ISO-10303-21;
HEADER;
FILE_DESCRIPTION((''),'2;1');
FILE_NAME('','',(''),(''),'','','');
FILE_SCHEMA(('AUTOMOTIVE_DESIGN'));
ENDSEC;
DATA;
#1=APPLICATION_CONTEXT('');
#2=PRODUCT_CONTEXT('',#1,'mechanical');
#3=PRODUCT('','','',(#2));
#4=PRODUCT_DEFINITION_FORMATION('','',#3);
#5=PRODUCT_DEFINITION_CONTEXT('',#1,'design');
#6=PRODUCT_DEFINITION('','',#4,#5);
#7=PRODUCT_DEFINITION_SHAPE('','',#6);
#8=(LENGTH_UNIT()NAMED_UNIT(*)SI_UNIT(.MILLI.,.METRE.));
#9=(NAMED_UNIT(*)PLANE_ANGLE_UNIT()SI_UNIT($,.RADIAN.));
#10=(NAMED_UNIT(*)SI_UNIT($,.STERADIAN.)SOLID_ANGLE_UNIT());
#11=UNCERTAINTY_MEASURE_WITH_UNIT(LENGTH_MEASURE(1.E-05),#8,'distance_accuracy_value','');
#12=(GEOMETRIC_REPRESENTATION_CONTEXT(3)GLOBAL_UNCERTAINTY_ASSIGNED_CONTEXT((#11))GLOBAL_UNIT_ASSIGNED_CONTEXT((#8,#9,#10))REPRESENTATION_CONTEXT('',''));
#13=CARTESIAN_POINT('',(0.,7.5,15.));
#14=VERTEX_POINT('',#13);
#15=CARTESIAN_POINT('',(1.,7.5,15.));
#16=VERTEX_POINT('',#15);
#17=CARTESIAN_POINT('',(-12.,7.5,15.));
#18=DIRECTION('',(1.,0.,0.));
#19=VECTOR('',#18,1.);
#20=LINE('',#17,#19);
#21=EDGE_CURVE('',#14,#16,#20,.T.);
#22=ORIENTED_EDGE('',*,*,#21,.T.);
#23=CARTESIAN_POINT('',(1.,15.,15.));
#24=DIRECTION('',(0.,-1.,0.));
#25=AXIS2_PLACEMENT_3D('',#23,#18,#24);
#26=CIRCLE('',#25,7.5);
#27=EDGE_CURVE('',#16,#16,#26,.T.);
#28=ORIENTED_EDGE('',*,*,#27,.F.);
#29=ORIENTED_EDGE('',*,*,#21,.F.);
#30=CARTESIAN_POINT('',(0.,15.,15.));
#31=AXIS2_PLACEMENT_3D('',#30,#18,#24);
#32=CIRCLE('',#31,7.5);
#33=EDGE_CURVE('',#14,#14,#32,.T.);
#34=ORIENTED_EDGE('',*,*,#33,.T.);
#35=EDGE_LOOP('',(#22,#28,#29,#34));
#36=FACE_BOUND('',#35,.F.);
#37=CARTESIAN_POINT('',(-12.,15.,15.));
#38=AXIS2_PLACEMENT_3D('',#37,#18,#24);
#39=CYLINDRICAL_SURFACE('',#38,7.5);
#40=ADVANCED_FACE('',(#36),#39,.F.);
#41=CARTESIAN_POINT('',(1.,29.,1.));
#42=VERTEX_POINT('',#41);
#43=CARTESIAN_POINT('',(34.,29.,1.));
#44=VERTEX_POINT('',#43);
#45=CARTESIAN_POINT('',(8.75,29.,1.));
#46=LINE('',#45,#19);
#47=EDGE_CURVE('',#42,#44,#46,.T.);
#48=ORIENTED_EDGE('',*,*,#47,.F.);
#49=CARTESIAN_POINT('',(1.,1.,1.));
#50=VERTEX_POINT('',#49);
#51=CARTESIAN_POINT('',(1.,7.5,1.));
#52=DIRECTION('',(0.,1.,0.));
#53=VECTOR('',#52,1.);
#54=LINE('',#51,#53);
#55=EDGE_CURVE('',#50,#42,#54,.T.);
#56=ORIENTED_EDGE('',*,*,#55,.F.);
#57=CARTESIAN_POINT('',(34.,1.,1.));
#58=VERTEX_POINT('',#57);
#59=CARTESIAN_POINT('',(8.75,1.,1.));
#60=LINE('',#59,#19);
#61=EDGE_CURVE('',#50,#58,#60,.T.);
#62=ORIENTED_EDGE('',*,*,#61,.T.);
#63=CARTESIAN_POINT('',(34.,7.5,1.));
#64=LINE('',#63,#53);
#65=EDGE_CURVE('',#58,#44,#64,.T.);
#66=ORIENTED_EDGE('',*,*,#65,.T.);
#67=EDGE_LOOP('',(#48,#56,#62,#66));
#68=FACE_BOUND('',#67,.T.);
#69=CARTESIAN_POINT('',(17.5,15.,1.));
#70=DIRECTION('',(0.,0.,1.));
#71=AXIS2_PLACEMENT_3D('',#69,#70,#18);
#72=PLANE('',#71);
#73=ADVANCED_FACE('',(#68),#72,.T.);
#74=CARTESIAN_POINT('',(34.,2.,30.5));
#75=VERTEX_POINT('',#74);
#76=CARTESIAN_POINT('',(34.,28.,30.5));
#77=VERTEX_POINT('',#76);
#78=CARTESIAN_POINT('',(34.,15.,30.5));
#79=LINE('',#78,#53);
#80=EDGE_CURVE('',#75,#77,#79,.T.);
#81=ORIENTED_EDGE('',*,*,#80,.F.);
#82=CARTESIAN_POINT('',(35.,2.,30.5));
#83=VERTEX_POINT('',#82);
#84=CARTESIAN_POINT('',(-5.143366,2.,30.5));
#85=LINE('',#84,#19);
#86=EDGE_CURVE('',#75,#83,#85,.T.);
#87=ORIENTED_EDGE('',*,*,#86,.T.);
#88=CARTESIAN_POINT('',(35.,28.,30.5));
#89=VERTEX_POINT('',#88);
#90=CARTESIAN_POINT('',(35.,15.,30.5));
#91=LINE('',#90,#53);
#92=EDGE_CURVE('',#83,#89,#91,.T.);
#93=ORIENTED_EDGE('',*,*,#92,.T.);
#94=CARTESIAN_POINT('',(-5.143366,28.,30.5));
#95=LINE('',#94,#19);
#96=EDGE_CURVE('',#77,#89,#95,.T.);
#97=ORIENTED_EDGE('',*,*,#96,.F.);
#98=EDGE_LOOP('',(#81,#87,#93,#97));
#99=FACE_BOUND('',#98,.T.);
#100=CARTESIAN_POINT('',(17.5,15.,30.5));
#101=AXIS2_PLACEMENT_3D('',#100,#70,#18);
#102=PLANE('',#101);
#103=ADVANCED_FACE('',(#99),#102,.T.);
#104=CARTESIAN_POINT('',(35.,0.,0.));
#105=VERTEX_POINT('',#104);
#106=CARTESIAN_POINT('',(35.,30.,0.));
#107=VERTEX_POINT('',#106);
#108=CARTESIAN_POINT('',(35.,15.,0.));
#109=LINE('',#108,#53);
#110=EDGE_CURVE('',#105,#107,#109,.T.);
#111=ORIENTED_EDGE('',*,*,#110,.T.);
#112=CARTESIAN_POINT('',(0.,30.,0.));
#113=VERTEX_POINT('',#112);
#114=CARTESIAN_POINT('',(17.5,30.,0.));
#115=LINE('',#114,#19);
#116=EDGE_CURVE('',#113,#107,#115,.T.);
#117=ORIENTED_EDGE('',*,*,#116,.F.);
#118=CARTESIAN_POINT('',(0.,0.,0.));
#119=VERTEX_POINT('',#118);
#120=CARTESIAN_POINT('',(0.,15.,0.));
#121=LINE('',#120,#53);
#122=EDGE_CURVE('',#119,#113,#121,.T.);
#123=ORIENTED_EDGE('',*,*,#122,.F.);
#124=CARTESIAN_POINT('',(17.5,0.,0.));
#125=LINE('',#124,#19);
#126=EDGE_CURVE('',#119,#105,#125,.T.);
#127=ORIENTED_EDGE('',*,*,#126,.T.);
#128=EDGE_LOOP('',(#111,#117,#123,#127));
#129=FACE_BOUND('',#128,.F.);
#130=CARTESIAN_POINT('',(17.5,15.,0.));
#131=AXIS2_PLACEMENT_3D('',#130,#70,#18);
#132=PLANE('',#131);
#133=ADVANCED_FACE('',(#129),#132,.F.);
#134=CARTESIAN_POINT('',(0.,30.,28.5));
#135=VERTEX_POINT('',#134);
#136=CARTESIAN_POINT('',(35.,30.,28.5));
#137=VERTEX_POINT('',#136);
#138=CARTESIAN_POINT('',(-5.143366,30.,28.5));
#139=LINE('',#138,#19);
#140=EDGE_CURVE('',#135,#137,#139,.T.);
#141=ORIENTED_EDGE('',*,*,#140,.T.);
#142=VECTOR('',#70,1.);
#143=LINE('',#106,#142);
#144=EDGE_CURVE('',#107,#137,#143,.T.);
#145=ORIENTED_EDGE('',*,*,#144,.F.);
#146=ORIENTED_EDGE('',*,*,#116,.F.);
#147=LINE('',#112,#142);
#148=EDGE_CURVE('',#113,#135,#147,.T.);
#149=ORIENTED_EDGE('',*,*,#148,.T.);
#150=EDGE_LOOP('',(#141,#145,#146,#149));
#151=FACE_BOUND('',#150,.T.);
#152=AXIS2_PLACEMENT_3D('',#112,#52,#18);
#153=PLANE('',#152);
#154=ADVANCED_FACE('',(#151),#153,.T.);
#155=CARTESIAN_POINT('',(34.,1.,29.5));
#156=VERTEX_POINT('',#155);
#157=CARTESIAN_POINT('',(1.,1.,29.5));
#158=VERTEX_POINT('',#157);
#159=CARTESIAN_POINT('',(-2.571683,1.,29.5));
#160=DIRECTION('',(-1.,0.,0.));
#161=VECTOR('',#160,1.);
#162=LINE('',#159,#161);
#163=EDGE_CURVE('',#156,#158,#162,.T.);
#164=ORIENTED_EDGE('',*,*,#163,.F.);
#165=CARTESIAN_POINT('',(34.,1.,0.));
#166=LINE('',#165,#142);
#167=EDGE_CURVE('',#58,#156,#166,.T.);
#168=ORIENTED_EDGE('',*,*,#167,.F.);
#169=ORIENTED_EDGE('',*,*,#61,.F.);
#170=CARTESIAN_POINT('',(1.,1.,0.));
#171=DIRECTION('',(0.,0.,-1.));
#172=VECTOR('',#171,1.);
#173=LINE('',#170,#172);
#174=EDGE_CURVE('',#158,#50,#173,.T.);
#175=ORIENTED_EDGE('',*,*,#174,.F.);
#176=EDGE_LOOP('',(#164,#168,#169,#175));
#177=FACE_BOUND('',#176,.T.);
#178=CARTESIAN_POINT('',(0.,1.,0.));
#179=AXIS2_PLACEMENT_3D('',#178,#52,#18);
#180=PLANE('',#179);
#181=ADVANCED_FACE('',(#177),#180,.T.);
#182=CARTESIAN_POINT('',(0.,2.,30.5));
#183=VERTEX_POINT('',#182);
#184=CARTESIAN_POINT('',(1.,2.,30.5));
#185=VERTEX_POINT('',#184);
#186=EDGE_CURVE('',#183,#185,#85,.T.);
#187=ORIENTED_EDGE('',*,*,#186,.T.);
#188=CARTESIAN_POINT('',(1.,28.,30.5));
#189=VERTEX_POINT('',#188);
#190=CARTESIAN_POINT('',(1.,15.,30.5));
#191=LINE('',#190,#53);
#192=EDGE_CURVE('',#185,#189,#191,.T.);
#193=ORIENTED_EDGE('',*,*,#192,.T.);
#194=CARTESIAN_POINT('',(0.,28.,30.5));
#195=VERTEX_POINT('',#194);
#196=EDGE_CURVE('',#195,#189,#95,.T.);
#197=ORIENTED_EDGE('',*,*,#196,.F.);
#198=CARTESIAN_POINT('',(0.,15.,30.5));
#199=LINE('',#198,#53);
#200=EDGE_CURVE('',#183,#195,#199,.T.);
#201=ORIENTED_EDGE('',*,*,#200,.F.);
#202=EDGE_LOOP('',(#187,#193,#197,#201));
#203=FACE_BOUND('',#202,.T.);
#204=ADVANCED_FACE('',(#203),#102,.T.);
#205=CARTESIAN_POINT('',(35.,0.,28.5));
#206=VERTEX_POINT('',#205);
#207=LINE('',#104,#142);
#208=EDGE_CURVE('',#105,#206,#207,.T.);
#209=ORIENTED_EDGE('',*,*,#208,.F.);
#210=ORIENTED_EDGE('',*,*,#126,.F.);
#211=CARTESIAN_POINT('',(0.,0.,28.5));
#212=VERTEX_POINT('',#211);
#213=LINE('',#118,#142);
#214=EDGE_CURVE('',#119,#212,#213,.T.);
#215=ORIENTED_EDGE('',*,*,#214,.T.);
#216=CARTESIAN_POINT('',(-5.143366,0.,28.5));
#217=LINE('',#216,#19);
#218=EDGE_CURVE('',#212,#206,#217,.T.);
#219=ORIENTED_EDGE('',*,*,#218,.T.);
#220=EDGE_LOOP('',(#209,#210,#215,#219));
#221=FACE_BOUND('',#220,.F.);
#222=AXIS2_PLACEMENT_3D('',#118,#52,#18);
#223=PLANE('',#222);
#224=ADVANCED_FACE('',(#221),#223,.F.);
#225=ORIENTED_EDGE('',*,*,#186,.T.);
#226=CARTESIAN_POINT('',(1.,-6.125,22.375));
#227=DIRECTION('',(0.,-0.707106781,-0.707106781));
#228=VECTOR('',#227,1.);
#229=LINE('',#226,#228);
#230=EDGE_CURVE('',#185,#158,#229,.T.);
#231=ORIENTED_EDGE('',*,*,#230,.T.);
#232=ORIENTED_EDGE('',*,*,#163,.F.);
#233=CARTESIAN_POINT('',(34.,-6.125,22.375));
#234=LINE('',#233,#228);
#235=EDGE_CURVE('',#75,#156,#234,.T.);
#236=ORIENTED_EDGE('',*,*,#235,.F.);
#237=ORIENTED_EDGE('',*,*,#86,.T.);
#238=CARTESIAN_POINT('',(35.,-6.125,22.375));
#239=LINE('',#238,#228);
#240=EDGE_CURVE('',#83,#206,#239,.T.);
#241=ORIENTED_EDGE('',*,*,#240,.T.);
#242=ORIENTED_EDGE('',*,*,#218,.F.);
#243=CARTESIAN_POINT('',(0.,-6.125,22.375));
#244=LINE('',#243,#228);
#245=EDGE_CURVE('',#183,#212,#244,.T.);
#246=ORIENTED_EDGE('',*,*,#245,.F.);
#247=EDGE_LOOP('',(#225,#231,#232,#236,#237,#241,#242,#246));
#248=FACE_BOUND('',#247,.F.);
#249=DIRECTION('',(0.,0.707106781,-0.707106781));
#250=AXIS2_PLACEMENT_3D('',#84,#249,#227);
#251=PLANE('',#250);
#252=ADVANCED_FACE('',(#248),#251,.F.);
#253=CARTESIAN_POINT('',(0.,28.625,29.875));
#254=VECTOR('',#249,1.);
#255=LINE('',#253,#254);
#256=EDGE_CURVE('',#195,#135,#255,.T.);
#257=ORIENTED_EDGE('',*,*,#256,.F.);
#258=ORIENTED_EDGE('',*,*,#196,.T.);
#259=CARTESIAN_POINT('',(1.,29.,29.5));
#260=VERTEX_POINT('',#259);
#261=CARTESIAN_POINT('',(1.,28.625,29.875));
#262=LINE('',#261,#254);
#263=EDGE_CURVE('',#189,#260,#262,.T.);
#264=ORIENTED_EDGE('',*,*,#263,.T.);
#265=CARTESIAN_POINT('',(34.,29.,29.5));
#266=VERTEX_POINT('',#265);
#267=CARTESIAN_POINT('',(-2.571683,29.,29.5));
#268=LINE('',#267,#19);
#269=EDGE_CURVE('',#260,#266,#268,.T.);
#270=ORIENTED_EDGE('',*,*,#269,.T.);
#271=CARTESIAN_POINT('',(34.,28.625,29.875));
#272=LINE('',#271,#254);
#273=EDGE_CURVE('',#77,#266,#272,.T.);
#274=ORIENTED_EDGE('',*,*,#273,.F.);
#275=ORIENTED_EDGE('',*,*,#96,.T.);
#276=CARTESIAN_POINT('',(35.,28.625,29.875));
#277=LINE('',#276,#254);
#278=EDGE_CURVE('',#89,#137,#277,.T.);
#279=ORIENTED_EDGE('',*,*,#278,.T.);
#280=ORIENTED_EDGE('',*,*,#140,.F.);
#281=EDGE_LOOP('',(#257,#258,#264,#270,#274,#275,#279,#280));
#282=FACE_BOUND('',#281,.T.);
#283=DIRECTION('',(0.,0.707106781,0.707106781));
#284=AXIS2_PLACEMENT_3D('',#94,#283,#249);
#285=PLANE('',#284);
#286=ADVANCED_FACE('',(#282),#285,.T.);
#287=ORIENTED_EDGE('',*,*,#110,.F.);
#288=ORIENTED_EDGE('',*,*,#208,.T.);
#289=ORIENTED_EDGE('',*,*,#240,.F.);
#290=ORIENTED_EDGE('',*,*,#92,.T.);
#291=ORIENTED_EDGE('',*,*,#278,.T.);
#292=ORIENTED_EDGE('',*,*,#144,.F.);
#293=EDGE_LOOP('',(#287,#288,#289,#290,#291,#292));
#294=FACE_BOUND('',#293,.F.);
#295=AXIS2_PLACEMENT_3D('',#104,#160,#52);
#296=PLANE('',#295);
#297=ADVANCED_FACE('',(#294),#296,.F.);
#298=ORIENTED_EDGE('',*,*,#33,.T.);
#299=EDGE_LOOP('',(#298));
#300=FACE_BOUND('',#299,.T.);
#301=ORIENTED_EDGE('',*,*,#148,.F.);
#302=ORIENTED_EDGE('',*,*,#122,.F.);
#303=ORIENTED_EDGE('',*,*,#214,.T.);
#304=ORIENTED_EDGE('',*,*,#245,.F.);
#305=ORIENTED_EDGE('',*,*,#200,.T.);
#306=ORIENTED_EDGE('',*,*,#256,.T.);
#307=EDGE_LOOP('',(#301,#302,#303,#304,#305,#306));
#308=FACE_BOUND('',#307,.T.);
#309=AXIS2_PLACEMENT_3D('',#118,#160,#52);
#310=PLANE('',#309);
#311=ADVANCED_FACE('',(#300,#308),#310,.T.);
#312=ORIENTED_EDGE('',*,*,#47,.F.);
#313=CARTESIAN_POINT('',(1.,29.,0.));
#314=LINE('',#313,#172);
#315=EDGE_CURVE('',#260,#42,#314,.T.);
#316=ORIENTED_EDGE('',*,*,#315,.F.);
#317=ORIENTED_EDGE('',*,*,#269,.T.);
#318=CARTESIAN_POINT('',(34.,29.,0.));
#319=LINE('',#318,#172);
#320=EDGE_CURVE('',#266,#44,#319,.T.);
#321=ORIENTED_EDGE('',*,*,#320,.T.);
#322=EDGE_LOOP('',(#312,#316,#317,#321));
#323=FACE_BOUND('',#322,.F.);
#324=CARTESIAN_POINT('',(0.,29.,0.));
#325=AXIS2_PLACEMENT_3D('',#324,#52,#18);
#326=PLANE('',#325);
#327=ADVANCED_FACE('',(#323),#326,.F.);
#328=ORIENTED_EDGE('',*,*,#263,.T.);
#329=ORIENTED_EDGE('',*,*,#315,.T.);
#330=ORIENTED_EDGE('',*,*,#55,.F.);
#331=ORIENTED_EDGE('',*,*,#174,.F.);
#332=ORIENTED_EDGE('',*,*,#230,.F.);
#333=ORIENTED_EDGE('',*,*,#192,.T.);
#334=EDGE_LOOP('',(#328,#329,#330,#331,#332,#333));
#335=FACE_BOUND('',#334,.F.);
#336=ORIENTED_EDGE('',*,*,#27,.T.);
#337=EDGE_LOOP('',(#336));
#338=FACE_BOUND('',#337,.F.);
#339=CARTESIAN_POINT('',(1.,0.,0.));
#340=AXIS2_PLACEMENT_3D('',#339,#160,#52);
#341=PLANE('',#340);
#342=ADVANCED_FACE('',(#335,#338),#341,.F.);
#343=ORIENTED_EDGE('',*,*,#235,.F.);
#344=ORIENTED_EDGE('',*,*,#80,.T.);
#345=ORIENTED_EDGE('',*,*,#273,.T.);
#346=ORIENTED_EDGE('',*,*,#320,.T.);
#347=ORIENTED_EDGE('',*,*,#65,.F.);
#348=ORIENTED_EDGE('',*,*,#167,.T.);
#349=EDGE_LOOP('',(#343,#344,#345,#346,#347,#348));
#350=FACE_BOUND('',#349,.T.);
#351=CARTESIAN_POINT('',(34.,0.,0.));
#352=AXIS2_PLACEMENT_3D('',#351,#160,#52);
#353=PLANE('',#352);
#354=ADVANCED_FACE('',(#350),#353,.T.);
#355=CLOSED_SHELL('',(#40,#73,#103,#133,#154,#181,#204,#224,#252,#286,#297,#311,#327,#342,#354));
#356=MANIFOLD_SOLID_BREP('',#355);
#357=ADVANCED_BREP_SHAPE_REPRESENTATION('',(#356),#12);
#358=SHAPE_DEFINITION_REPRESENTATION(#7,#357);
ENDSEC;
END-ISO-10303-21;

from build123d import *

# Parameters (mm, degrees)
F0_W        = 35
F0_H        = 30
F1_DEPTH    = 30.5
F2_T        = -1
F4_D        = 15
F4_DEPTH    = 12
F4_TIP      = 4.5064546427
F5_T1_DEPTH = 45.2867319519
F6_T1_DEPTH = 45.2867319519


# Not quite as in the source:
# - a fillet or chamfer that OpenCascade refuses, or shapes differently, is made with other operations: its cross-section is extruded or revolved along the edge and cut away or added


with BuildPart() as f1:
    # F0 (on Top) → F1 (new body)
    with BuildSketch(Plane.XY):
        with Locations((17.5, 15)):
            Rectangle(F0_W, F0_H)
    extrude(amount=F1_DEPTH)

    # F2
    f2_openings = [f1.faces().sort_by_distance(p)[0] for p in [
        (17.5, 15, 30.5),
    ]]
    offset(amount=F2_T, openings=f2_openings)

    # F4
    with Locations(Plane(origin=(0, 0, 0), x_dir=(0, 1, 0), z_dir=(-1, 0, 0))):
        with Locations((15, -15)):
            Hole(F4_D / 2, depth=F4_DEPTH)
            with Locations((0, 0, -(F4_DEPTH + F4_TIP / 2))):  # 118° drill point
                Cone(0, F4_D / 2, F4_TIP, mode=Mode.SUBTRACT)

    # F5: chamfer of 2 on 1 edges, made by hand

    # F5_s2 → F5_t1 (cut)
    with BuildSketch(Plane.YZ.offset(-5.1433659759)):
        Polygon((2, 30.5), (0, 28.5), (0, 30.5), align=None)
    extrude(amount=F5_T1_DEPTH, mode=Mode.SUBTRACT)

    # F6: chamfer of 2 on 1 edges, made by hand

    # F6_s2 → F6_t1 (cut)
    with BuildSketch(Plane.YZ.offset(-5.1433659759)):
        Polygon((28, 30.5), (30, 28.5), (30, 30.5), align=None)
    extrude(amount=F6_T1_DEPTH, mode=Mode.SUBTRACT)


solid = f1.part
